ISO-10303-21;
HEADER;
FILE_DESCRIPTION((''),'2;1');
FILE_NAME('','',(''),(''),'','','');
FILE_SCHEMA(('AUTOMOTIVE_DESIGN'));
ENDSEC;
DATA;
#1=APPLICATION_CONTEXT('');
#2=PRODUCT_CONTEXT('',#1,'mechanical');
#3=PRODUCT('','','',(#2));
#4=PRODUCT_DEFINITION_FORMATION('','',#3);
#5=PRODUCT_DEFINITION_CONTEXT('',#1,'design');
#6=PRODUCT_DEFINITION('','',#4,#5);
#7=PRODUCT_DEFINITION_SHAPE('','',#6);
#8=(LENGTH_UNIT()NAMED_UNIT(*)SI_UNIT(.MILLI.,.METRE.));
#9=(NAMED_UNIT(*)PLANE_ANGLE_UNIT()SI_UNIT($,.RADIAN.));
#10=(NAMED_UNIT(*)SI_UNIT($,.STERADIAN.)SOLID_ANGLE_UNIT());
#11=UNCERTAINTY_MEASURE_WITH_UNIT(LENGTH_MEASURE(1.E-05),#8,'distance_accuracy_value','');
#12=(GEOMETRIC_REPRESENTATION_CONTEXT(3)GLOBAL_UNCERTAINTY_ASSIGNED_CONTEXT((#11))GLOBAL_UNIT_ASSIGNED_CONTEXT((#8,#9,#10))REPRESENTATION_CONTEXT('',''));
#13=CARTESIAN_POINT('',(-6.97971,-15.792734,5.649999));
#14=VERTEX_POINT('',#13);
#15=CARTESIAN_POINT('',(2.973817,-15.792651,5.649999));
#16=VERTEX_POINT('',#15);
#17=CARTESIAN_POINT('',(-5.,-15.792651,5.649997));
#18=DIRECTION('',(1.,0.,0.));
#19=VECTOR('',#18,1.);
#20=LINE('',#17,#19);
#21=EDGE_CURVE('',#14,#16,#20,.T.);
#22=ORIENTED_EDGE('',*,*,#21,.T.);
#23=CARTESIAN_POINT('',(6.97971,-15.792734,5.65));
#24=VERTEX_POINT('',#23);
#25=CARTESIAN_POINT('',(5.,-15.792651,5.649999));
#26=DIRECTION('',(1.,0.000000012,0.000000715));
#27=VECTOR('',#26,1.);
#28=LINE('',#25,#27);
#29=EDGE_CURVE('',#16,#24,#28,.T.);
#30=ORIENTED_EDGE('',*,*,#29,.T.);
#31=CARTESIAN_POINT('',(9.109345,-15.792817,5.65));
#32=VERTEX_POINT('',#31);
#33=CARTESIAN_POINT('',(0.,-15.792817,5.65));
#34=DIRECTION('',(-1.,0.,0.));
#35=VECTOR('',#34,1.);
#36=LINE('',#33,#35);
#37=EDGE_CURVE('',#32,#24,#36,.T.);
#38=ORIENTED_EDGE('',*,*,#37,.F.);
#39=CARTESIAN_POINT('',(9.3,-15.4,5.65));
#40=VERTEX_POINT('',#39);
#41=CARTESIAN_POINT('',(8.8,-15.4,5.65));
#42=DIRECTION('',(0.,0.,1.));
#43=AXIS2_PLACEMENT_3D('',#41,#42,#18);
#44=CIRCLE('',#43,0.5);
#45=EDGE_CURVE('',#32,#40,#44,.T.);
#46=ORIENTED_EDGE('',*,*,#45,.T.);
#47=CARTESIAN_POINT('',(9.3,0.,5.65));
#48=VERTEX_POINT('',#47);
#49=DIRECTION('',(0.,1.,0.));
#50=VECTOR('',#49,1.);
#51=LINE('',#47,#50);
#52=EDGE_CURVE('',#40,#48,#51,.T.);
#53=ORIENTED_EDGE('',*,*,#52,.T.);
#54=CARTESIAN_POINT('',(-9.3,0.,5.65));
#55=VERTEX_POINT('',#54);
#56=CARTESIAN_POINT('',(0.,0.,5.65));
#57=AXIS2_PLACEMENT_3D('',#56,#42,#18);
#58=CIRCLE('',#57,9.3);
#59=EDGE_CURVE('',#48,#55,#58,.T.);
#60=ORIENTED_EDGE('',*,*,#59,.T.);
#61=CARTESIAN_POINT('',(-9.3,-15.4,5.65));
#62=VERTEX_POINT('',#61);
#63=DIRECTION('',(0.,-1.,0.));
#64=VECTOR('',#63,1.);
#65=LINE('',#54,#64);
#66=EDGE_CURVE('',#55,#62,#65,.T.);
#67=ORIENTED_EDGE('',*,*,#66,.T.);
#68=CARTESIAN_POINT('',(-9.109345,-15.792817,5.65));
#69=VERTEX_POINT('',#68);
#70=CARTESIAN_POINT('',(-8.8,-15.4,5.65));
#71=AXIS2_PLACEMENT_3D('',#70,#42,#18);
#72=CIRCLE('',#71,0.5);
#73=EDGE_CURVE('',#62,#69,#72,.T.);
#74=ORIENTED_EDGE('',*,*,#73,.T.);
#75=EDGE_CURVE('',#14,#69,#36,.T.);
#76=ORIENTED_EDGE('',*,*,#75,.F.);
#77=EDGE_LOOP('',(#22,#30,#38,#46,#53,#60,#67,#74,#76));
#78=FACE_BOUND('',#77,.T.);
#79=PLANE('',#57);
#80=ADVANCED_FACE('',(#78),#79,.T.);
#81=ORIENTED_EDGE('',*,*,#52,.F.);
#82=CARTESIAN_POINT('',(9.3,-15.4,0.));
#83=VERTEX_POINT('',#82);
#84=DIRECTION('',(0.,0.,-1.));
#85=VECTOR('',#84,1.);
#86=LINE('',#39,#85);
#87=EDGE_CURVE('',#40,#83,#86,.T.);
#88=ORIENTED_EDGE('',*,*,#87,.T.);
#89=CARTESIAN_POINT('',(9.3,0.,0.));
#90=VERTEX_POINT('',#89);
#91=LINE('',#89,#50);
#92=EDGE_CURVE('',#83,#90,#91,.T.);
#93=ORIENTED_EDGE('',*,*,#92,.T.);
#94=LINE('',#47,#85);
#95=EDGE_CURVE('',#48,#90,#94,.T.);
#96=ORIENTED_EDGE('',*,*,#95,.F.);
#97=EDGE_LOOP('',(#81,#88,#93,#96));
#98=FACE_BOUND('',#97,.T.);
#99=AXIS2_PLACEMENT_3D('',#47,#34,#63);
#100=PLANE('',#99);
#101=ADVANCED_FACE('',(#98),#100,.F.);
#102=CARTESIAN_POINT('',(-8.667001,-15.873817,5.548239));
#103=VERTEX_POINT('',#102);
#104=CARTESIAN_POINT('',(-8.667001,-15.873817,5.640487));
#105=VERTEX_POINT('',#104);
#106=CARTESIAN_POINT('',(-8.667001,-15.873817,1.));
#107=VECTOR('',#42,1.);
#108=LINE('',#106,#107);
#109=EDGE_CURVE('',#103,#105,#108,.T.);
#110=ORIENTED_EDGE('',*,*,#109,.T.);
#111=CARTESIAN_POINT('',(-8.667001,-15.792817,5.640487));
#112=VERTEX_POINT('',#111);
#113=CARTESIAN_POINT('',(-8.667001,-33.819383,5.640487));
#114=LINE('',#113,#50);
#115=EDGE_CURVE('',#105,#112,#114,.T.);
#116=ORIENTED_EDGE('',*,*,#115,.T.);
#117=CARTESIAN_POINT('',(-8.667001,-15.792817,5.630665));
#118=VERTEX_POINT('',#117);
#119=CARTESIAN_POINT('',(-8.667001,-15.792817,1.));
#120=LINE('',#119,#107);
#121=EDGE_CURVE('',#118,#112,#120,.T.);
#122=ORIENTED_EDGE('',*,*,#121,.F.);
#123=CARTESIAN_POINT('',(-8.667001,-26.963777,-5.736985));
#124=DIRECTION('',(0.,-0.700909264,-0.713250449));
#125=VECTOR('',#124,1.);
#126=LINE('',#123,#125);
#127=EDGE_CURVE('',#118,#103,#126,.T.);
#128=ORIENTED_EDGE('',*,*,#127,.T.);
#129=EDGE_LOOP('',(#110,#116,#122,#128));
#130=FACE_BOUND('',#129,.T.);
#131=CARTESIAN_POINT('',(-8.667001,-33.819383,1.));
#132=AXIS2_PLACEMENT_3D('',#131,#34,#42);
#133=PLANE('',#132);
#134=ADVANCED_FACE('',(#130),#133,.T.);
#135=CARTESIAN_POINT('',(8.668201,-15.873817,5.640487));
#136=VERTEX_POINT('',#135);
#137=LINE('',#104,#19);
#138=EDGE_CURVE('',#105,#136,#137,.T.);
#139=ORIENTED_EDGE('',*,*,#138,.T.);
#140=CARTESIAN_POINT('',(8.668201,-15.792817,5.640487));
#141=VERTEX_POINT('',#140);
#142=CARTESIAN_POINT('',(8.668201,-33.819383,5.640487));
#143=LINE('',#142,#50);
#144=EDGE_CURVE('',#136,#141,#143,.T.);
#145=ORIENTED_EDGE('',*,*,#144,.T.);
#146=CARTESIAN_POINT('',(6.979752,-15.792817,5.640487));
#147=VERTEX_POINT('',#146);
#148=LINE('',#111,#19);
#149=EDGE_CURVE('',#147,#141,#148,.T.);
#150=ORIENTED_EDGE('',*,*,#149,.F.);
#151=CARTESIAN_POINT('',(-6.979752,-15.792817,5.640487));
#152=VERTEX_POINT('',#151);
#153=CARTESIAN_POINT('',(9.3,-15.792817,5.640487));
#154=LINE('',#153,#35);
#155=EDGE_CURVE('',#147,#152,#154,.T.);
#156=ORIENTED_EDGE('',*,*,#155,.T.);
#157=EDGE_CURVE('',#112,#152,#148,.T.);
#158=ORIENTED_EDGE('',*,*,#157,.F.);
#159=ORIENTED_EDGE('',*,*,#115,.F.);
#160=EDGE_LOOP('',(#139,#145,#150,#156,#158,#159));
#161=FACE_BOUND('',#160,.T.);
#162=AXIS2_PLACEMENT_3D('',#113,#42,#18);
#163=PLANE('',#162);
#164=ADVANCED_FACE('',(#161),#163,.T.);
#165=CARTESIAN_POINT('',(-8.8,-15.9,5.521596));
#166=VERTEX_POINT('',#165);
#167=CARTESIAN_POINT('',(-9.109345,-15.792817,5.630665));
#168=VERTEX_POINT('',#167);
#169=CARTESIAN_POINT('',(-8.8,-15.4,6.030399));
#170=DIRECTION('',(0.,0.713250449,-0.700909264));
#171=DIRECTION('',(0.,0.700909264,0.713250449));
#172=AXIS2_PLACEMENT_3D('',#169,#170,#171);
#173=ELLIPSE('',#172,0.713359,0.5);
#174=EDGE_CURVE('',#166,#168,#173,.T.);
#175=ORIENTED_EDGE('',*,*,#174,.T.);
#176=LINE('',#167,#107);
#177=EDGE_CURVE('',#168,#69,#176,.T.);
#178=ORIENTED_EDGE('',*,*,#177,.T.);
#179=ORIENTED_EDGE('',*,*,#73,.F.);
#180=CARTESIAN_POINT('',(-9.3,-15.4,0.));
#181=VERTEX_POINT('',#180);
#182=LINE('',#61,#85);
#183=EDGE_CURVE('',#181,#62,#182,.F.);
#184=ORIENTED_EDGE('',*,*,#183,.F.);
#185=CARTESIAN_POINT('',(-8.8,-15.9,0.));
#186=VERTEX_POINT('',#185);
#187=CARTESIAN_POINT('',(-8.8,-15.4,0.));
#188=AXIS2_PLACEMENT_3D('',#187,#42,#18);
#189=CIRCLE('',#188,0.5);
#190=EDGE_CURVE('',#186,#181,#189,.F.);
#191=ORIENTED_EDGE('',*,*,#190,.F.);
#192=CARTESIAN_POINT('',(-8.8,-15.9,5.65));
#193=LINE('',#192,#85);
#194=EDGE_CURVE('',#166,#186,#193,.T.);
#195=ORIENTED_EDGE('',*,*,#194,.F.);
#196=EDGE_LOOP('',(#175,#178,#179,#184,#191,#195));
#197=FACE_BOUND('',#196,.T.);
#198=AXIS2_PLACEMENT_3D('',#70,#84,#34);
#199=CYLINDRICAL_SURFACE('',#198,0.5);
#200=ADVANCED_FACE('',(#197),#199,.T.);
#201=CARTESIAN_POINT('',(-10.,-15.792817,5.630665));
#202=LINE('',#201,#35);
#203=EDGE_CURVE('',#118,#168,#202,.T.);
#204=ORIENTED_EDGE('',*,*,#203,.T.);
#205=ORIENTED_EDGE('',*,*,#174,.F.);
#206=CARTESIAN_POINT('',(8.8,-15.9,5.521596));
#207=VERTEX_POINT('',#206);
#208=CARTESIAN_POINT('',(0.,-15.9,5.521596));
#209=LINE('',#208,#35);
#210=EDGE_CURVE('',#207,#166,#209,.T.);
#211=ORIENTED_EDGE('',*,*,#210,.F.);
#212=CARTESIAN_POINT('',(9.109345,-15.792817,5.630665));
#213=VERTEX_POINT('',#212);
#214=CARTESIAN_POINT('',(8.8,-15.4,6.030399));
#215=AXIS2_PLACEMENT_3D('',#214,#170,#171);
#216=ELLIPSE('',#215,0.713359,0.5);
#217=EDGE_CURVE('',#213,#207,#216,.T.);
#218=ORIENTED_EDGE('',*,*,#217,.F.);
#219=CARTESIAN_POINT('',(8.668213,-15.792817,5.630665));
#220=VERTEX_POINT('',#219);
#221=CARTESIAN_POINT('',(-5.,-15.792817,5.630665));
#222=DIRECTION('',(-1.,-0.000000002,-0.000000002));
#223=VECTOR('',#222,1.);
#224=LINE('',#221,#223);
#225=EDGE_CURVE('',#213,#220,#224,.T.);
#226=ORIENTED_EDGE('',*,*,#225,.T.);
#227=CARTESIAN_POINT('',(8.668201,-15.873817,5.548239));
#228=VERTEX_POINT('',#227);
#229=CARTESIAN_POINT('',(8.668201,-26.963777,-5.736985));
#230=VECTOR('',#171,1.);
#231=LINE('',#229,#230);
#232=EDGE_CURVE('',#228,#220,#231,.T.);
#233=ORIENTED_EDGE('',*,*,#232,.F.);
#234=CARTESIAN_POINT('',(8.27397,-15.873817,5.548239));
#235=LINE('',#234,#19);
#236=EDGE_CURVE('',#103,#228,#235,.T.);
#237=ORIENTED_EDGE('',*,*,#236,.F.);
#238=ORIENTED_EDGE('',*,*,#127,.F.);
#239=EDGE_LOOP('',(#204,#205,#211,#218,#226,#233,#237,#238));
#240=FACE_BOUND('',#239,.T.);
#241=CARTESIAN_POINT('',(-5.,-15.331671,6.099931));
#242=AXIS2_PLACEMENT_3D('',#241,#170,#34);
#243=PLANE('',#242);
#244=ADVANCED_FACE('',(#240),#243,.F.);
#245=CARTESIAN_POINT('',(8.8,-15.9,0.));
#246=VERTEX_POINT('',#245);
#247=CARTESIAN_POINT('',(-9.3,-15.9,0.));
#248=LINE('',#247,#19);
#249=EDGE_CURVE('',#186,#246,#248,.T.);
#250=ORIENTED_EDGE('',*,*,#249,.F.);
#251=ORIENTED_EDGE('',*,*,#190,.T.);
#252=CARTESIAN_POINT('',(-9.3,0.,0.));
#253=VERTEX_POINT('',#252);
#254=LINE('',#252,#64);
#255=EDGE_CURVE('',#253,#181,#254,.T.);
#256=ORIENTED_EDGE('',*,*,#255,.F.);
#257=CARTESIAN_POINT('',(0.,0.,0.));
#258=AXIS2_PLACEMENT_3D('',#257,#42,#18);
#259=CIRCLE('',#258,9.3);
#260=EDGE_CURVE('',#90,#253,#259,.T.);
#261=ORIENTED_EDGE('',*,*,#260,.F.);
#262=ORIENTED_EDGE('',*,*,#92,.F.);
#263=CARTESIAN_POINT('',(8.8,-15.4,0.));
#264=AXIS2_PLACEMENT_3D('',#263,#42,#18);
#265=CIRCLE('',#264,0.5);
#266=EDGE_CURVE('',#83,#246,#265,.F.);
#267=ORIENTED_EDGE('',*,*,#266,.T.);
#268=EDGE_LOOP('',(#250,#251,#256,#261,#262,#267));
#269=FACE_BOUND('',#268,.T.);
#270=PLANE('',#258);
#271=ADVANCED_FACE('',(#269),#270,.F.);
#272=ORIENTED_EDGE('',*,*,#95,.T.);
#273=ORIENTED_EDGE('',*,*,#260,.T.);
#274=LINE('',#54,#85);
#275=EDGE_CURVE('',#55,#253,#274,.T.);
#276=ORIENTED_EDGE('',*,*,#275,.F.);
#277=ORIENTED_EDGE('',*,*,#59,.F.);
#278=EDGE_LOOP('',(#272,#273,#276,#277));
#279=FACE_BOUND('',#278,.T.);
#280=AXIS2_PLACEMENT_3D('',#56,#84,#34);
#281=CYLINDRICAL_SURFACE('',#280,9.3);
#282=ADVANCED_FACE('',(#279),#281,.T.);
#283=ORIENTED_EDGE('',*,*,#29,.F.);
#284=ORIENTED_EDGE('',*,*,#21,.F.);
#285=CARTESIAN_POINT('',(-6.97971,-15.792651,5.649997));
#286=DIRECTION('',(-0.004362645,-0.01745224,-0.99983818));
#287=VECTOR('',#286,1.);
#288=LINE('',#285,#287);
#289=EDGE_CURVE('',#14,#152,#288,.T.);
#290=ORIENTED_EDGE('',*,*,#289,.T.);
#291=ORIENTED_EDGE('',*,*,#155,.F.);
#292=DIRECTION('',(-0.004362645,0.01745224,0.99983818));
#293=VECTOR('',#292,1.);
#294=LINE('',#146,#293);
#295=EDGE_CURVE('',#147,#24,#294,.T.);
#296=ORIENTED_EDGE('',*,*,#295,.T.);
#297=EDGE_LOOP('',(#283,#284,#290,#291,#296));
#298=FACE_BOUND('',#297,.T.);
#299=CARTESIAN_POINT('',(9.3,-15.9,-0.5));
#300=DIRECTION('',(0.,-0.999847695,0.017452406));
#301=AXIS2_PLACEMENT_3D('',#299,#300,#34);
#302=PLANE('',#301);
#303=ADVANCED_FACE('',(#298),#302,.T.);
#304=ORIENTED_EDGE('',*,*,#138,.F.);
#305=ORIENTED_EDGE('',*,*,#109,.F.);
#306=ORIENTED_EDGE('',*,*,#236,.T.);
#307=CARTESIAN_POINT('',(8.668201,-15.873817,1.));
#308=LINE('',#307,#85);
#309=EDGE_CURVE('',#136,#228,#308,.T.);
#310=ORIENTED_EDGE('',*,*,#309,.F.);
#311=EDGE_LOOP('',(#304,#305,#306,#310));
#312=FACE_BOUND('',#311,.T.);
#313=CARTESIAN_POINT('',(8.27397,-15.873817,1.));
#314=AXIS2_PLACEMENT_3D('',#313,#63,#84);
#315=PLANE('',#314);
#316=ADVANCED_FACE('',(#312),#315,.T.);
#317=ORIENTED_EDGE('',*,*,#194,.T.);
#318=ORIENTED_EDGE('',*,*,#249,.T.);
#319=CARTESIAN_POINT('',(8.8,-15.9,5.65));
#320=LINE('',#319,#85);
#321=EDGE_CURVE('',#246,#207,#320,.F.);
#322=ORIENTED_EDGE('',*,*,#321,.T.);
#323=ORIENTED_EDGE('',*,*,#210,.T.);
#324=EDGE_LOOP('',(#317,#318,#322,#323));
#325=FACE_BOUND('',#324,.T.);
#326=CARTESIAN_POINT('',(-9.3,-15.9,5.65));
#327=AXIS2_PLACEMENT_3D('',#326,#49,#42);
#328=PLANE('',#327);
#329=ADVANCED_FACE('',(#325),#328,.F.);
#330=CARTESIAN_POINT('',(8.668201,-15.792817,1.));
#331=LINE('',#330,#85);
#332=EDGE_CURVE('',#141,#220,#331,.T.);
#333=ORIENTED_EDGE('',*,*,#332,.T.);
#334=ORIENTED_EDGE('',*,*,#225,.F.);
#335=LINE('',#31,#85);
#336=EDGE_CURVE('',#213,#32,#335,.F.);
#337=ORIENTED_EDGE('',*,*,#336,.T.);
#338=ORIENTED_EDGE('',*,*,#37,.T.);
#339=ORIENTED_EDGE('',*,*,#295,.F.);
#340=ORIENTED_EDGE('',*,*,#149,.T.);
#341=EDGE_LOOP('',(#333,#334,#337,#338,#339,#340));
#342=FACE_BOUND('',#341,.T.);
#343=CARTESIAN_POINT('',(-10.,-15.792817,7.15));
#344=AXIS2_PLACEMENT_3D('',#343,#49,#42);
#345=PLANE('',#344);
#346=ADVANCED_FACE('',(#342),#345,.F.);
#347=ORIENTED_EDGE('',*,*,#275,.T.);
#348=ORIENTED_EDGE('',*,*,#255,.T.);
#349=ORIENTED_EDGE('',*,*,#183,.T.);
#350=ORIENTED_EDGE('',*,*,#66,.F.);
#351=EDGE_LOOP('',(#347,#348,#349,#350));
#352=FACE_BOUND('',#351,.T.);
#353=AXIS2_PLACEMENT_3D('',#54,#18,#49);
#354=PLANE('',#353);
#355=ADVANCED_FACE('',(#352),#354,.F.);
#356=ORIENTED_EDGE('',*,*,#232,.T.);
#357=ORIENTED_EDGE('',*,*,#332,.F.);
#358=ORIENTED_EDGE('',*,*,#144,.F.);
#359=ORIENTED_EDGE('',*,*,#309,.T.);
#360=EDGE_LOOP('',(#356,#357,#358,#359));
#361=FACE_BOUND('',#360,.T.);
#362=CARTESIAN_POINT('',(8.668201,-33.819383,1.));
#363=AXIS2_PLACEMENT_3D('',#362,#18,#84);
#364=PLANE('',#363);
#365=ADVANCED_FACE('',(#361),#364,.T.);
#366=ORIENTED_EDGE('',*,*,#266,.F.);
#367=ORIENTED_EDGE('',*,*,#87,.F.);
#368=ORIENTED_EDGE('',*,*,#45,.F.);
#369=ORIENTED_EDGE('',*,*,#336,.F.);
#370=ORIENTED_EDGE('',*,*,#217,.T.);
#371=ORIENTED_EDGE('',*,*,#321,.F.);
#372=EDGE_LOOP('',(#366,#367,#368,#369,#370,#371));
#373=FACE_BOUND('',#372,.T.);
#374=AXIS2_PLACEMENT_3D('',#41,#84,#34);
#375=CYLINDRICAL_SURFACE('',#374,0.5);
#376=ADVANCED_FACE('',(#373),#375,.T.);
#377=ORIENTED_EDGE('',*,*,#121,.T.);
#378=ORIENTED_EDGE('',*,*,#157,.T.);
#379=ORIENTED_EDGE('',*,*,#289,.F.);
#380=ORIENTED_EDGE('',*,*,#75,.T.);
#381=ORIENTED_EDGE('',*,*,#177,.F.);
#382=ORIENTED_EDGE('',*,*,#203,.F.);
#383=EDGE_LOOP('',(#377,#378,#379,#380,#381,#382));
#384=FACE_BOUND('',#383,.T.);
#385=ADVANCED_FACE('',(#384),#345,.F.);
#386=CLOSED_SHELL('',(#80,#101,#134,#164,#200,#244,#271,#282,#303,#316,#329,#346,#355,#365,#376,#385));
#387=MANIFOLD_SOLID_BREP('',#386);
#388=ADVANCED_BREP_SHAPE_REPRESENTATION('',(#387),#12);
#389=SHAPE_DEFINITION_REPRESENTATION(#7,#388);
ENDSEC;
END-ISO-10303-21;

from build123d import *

# Parameters (mm, degrees)
EXTRUDE_1_DEPTH = 5.65
FILLET_1_R      = 0.5
OTHER_START     = -9.109345257
OTHER_1_DEPTH   = 18.218690514
OTHER_1_2_DEPTH = 0.442344722
OTHER_START_2   = 8.668200897
OTHER_1_3_DEPTH = 0.44114436


# Read off the part's stored shape, not the designer's step: 型腔1
with BuildPart() as part:
    # 草图1 → 凸台-拉伸1 (new body)
    with BuildSketch(Plane.XY):
        with BuildLine():
            Line((-9.3, 0), (-9.3, -15.9))
            Line((-9.3, -15.9), (9.3, -15.9))
            Line((9.3, -15.9), (9.3, 0))
            ThreePointArc((9.3, 0), (0, 9.3), (-9.3, 0))
        make_face()
    extrude(amount=EXTRUDE_1_DEPTH)

    # 圆角1
    fillet_1_edges = [part.edges().sort_by_distance(p)[0] for p in [
        (9.3, -15.9, 2.825),
        (-9.3, -15.9, 2.825),
    ]]
    fillet(fillet_1_edges, radius=FILLET_1_R)

    # 型腔1 outline → 型腔1 (cut)
    with BuildSketch(Plane.YZ.offset(OTHER_START)):
        Polygon((-15.873817403, 5.640486893), (-15.792817403, 5.640486893), (-15.792817403, 5.65), (-15.9, 5.65), (-15.9, 5.521595656), (-15.873817403, 5.54823926), align=None)
    extrude(amount=OTHER_1_DEPTH, mode=Mode.SUBTRACT)

    # Other 1 2 outline → Other 1 2 (cut)
    with BuildSketch(Plane.YZ.offset(OTHER_START)):
        Polygon((-15.873817403, 5.54823926), (-15.792817403, 5.63066546), (-15.792817403, 5.640486893), (-15.873817403, 5.640486893), align=None)
    extrude(amount=OTHER_1_2_DEPTH, mode=Mode.SUBTRACT)

    # Other 1 3 outline → Other 1 3 (cut)
    with BuildSketch(Plane.YZ.offset(OTHER_START_2)):
        Polygon((-15.873817403, 5.54823926), (-15.792817403, 5.63066546), (-15.792817403, 5.640486893), (-15.873817403, 5.640486893), align=None)
    extrude(amount=OTHER_1_3_DEPTH, mode=Mode.SUBTRACT)


solid = part.part
